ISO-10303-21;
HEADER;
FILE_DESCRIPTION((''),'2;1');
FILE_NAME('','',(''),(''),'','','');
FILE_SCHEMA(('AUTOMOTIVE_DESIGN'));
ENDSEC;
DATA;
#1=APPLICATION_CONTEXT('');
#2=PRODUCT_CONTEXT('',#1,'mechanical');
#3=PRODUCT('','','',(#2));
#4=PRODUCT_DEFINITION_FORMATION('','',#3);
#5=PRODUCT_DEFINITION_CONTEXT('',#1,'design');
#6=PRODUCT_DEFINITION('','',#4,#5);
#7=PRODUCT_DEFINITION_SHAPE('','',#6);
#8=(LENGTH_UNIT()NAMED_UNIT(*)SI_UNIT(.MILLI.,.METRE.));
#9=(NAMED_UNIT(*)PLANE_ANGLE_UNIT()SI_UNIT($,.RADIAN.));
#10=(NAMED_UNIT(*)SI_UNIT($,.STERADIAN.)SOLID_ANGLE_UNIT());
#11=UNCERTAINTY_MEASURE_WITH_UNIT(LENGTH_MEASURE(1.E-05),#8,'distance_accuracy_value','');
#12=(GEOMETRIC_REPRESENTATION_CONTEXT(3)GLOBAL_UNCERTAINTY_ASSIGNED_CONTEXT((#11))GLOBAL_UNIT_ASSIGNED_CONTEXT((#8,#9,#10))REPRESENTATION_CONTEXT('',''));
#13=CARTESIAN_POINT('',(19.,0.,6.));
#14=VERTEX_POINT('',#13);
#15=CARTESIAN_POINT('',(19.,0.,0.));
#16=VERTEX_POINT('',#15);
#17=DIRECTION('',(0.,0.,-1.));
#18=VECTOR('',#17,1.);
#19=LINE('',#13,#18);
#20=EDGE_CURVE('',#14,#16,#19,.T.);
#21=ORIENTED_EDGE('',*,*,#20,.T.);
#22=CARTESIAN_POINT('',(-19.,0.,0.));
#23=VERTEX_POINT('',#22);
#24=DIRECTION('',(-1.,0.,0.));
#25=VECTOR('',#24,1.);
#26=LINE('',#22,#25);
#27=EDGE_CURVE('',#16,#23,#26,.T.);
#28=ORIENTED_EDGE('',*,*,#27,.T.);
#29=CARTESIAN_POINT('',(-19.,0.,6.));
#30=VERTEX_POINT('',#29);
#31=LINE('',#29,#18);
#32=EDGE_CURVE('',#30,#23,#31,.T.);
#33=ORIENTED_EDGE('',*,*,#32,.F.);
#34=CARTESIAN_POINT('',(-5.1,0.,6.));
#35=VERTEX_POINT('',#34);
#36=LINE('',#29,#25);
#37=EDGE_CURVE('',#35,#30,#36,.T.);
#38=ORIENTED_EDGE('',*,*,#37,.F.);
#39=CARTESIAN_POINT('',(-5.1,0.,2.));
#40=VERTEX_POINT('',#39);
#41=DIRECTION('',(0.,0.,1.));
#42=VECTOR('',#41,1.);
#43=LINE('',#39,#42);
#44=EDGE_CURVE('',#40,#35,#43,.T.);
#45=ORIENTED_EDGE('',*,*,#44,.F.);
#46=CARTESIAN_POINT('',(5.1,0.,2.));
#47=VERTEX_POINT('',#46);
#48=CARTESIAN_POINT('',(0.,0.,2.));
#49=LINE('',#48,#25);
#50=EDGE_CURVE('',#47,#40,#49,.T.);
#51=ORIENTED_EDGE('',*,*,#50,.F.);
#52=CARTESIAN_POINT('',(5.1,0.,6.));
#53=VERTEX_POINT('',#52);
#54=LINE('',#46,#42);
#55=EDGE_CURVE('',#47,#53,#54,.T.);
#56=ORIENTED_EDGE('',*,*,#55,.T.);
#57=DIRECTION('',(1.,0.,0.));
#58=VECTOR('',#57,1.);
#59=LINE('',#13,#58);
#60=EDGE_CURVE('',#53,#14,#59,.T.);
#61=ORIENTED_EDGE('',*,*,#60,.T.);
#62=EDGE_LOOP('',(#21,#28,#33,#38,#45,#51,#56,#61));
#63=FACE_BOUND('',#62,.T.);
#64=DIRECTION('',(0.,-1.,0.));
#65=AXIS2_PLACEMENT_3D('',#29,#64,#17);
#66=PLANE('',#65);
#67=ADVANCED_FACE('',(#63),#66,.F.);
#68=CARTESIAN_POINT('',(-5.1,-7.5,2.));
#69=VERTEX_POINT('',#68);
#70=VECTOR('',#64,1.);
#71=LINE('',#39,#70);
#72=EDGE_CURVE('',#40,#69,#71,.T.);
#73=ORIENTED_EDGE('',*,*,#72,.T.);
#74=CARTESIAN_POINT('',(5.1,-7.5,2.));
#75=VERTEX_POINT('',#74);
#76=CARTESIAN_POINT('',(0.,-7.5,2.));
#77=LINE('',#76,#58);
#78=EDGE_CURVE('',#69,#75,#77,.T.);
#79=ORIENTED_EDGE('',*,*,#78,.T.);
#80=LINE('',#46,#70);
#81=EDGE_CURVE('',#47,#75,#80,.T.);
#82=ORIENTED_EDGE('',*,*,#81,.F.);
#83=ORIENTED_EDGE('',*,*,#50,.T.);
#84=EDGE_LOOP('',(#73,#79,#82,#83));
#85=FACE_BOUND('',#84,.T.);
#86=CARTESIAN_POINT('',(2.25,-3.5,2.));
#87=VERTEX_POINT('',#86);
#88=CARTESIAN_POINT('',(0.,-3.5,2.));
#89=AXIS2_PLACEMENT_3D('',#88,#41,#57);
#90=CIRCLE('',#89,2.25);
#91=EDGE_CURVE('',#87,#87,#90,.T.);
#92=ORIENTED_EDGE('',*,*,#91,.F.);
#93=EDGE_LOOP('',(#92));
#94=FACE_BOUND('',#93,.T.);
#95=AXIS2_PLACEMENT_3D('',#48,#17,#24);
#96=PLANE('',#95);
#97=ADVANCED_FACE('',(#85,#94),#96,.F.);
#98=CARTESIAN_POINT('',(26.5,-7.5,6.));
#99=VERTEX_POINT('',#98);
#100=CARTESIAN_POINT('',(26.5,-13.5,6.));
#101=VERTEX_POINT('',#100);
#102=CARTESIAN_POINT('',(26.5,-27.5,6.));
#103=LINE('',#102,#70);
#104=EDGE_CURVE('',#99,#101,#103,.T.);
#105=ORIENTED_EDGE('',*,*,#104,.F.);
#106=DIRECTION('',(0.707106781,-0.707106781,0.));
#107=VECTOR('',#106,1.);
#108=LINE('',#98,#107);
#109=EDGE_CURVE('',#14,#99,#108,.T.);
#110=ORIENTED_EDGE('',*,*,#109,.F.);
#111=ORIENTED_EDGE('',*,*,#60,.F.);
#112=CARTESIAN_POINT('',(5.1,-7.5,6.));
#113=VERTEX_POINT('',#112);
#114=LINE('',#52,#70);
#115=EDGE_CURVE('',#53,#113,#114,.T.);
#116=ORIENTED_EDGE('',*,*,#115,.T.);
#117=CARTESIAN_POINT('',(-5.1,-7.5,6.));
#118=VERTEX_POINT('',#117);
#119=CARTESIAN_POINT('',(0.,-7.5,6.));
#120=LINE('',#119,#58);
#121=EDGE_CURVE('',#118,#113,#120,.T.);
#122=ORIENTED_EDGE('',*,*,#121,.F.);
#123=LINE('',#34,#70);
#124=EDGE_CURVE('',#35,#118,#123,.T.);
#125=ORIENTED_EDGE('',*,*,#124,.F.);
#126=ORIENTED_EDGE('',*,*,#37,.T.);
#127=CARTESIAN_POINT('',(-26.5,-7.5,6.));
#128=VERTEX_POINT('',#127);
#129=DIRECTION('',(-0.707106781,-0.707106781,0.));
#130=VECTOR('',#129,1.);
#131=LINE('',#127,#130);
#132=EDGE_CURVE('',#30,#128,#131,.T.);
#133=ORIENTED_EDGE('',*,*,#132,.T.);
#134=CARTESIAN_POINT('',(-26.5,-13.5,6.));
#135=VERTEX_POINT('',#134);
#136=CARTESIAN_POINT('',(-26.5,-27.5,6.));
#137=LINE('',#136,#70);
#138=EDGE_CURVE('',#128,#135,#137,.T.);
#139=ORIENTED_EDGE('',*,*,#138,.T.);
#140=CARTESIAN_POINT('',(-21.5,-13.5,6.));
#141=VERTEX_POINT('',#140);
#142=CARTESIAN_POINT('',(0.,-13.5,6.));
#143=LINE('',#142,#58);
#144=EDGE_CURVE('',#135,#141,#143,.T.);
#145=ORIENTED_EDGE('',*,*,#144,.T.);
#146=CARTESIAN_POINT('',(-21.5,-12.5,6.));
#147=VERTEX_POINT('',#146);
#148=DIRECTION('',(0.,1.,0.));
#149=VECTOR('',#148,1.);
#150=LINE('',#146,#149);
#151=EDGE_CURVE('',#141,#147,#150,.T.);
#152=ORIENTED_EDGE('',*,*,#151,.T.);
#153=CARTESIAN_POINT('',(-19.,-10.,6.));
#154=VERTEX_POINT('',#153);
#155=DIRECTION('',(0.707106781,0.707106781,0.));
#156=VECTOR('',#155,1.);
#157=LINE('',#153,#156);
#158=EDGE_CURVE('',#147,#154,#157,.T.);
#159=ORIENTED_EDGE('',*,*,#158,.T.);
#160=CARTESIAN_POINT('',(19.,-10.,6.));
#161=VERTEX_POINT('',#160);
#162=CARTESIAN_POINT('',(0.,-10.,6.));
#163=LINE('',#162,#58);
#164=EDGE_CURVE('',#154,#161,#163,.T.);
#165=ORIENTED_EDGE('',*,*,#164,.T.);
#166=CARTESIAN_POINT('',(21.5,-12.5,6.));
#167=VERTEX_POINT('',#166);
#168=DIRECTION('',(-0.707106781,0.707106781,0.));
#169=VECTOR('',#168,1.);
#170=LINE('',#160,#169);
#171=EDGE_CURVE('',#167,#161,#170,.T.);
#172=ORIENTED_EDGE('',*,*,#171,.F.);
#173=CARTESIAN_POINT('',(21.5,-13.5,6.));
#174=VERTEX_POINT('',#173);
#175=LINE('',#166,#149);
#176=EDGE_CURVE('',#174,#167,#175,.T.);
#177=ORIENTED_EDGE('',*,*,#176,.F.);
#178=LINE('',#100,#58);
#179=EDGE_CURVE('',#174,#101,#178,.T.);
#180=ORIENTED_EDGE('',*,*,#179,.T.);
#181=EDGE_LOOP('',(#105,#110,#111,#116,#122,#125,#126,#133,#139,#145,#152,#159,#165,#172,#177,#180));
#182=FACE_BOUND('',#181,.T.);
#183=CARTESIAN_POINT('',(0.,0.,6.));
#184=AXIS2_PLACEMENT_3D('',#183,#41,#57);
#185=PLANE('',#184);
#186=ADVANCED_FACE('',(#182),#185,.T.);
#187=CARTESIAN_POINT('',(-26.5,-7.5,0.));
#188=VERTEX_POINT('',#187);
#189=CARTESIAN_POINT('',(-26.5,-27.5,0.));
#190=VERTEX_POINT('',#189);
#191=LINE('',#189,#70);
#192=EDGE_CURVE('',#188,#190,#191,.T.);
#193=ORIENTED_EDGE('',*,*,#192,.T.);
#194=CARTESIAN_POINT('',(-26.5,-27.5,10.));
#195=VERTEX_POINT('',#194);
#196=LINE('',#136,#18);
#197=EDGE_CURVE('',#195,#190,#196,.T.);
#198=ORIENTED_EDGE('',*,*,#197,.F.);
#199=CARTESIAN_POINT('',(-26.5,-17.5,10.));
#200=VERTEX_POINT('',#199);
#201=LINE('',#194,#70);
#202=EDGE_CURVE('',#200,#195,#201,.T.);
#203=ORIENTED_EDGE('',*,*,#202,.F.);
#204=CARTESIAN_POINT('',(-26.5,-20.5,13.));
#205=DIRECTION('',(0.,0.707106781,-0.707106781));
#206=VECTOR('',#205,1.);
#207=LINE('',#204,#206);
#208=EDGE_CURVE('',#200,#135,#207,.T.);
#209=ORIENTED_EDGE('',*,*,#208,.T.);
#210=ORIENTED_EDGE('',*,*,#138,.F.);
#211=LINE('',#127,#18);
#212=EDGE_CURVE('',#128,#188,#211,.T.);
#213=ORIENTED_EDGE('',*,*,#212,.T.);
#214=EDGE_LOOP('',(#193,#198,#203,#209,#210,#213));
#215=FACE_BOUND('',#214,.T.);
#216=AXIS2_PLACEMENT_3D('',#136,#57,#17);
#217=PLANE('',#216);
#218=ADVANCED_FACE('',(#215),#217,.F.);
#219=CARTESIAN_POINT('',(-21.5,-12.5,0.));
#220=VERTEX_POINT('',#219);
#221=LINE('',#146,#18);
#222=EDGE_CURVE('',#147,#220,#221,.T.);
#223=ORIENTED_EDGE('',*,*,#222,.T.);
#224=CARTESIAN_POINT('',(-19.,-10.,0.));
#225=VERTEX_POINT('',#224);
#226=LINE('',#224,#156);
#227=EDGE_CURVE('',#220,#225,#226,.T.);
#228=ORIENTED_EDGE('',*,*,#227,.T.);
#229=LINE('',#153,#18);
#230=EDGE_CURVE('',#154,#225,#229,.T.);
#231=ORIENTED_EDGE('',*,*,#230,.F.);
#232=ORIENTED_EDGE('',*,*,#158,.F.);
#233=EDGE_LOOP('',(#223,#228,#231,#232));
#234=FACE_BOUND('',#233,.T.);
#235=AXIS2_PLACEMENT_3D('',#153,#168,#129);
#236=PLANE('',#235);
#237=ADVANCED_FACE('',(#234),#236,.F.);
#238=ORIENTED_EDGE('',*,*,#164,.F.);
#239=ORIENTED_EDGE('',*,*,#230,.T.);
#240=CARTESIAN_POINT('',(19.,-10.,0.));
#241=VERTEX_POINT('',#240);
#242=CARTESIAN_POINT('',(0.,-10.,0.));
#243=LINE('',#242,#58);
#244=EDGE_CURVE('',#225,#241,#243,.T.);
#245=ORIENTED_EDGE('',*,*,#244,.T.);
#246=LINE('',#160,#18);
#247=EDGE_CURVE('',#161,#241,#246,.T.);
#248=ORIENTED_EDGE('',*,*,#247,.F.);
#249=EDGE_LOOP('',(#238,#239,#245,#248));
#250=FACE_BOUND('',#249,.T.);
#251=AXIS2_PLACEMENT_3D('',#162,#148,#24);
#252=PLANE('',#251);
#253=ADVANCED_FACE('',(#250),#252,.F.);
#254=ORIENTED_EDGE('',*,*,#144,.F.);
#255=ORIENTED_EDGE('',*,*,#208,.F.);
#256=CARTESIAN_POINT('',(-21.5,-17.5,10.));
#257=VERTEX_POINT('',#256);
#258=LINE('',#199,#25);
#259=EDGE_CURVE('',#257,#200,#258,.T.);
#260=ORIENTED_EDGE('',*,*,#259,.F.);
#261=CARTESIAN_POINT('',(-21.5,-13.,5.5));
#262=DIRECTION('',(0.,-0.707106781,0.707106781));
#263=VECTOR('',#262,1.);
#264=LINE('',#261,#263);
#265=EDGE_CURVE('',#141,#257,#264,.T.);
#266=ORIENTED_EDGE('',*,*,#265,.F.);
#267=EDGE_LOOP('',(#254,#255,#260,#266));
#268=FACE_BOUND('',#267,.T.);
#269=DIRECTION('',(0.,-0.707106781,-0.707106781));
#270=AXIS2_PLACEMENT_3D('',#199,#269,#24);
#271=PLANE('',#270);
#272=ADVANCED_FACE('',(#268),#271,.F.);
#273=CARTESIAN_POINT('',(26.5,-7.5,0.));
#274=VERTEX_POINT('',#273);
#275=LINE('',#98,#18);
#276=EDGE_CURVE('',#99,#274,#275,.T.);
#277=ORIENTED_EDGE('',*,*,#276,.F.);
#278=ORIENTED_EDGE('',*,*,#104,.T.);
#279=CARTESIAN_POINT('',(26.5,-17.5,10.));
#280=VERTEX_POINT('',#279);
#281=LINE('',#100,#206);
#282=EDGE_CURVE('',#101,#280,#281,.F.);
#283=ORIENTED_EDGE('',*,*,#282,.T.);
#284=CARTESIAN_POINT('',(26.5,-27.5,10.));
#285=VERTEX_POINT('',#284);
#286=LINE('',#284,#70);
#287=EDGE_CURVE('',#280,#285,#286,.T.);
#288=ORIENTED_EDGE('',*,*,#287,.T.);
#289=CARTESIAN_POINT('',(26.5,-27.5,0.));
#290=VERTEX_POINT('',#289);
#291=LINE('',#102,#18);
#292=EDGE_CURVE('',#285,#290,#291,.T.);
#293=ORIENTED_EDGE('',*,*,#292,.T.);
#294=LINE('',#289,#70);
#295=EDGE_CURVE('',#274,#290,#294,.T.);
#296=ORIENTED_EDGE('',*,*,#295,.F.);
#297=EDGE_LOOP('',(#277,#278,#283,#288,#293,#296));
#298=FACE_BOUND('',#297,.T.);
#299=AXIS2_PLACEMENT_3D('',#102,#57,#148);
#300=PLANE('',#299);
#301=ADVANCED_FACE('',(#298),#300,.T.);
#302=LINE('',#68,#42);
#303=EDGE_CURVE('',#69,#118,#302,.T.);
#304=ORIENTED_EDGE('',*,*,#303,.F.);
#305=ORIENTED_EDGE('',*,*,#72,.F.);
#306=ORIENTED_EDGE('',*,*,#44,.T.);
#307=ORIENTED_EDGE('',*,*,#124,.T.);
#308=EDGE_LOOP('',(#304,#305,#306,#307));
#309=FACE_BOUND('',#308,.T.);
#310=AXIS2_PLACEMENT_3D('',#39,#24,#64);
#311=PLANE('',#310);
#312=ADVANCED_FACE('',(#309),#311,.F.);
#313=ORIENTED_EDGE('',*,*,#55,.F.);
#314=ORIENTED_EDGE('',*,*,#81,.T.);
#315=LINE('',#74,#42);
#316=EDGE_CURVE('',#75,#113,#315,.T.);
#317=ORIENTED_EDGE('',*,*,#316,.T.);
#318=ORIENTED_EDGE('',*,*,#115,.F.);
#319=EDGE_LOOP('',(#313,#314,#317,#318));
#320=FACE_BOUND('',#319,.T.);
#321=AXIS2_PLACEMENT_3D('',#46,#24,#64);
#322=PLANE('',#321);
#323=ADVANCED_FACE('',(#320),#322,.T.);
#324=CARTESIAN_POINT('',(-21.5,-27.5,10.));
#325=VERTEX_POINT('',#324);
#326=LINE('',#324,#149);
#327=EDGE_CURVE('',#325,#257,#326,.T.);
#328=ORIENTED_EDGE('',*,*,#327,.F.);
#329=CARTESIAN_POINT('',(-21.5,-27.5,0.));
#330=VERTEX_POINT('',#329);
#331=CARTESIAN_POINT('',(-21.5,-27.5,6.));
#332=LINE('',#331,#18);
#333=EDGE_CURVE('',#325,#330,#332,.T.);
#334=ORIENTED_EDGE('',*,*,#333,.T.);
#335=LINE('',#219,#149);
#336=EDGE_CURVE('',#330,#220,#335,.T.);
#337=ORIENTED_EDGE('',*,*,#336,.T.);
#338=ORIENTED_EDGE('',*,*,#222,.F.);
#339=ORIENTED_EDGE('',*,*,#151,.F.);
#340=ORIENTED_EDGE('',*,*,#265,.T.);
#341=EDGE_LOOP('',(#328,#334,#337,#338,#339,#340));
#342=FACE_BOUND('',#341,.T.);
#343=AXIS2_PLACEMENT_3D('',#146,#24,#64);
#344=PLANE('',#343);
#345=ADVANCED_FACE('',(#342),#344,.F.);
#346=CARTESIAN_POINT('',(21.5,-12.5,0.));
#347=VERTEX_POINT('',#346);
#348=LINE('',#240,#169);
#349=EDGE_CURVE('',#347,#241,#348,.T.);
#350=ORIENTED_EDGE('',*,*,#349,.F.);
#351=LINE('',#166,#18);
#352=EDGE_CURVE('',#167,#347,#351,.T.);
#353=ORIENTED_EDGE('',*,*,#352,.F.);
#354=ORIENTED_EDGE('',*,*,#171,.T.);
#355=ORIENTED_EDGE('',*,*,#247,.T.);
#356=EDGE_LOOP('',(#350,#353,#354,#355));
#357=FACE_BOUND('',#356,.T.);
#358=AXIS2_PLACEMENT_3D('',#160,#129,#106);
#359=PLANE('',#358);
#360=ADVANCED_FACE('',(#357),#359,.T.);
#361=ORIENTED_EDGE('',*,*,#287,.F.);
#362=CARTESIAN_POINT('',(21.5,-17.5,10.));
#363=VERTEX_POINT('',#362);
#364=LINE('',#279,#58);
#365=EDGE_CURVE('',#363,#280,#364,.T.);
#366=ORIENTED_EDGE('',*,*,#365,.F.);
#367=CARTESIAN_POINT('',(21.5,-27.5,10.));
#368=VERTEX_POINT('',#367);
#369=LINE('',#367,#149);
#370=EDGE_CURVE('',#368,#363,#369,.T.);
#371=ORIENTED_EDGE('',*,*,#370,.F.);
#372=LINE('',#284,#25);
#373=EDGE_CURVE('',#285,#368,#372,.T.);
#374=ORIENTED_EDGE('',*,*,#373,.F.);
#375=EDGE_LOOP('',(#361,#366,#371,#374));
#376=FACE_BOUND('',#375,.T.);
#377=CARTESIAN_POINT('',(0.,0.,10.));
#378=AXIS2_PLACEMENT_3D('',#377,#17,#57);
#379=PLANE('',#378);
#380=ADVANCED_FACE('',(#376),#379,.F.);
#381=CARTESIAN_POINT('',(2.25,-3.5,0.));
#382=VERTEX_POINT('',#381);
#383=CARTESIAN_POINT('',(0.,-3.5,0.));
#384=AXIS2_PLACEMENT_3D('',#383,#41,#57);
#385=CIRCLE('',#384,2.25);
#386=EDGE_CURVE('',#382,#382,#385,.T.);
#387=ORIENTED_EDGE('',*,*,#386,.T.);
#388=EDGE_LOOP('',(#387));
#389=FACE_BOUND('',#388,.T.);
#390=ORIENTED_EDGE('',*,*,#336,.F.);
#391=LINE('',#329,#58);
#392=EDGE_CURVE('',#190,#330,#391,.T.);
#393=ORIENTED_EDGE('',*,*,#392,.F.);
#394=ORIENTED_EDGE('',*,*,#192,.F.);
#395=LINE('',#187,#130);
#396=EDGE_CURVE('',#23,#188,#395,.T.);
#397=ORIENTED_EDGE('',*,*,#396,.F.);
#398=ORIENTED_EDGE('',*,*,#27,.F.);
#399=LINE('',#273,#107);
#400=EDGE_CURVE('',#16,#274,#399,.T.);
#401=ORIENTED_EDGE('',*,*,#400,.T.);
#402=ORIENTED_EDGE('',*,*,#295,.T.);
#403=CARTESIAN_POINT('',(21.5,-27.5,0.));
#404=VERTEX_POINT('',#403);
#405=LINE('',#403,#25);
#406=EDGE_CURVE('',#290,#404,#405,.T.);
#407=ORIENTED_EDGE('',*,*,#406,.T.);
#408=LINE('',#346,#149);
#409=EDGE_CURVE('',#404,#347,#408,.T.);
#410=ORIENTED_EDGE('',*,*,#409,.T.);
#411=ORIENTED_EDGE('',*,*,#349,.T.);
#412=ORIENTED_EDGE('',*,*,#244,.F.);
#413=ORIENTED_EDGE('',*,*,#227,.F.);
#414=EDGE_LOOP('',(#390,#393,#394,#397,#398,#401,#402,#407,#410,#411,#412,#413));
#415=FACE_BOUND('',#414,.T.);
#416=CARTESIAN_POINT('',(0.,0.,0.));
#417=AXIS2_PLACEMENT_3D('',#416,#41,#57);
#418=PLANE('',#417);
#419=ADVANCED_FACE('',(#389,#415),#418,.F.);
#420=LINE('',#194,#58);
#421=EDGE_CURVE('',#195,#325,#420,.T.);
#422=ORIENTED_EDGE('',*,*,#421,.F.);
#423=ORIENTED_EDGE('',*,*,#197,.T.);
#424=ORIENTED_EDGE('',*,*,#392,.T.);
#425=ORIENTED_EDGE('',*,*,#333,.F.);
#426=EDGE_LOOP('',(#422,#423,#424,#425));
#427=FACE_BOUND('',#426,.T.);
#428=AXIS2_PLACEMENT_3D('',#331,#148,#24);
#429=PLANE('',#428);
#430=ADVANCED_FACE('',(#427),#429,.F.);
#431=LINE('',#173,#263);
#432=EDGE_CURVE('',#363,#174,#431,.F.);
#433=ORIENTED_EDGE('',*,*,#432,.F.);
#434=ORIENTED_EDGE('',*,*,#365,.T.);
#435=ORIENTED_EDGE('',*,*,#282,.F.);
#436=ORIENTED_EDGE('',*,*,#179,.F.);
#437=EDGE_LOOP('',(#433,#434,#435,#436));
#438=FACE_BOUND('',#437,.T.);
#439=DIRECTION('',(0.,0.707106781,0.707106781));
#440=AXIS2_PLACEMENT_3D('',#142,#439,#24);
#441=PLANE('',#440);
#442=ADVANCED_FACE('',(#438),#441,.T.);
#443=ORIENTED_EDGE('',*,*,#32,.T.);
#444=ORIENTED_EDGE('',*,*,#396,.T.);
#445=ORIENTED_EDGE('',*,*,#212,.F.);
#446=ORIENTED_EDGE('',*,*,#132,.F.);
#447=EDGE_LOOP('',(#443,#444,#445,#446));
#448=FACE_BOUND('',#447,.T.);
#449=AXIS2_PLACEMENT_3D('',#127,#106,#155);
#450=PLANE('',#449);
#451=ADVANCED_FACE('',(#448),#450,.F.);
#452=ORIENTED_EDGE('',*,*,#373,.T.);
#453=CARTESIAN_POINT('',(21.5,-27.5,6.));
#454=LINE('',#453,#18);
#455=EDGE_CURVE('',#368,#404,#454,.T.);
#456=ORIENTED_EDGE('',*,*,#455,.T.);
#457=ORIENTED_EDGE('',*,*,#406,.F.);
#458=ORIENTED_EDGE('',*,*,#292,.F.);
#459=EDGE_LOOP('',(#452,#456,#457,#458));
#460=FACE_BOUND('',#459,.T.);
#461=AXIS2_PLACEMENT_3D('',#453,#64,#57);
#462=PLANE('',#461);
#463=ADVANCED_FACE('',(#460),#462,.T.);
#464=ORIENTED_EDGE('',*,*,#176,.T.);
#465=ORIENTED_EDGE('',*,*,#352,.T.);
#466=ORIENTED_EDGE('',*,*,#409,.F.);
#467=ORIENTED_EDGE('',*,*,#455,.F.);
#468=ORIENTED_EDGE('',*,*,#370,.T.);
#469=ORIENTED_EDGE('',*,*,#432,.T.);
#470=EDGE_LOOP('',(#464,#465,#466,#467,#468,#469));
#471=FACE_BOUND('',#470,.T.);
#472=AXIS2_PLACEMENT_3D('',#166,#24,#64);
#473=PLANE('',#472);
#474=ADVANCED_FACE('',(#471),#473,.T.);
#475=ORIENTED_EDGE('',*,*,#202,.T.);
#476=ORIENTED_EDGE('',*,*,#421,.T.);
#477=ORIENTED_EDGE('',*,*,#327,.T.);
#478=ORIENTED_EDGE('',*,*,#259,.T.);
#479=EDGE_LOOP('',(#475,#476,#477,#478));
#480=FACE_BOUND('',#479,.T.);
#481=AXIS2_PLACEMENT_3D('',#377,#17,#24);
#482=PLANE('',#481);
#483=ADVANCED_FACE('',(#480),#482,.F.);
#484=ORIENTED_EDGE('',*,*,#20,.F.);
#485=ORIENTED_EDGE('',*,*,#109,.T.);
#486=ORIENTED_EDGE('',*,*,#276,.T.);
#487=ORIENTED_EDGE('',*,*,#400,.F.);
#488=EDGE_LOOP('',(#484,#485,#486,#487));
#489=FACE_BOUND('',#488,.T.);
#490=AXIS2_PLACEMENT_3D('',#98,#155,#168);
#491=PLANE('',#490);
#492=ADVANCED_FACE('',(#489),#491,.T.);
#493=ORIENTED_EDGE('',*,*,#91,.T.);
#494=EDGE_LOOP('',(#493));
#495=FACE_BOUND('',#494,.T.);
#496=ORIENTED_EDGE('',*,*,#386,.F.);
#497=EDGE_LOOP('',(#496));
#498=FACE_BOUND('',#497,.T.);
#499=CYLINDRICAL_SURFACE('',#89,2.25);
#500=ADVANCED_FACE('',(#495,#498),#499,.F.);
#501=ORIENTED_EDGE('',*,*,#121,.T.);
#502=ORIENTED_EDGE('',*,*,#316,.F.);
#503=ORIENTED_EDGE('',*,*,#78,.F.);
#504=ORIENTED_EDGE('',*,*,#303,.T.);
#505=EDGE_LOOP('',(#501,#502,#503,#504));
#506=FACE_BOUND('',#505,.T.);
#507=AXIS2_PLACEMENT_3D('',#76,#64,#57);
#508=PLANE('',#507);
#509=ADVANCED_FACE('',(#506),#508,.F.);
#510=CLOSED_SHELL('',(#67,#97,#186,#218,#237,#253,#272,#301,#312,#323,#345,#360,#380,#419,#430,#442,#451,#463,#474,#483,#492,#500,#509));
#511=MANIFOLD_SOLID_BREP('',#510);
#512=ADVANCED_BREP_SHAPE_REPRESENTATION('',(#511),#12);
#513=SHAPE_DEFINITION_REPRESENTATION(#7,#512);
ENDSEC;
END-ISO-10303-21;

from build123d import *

# Parameters (mm, degrees)
BOSS_EXTRUDE1_DEPTH  = 6
SKETCH6_W            = 5
SKETCH6_H            = 10
BOSS_EXTRUDE2_DEPTH  = 4
SKETCH3_W            = 5.1
SKETCH3_H            = 7.5
CUT_EXTRUDE1_DEPTH   = 4
M4_CLEARANCE_HOLE1_D = 4.5
CHAMFER2_SIZE        = 4


with BuildPart() as part:
    # Sketch1 → Boss-Extrude1 (new body)
    with BuildSketch(Plane.XY):
        Polygon((0, 0), (0, -10), (-19, -10), (-21.5, -12.5), (-21.5, -27.5), (-26.5, -27.5), (-26.5, -7.5), (-19, 0), align=None)
    boss_extrude1 = extrude(amount=BOSS_EXTRUDE1_DEPTH)

    # Sketch6 → Boss-Extrude2 (add)
    with BuildSketch(Plane.XY.offset(6)):
        with Locations((-24, -22.5)):
            Rectangle(SKETCH6_W, SKETCH6_H)
    boss_extrude2 = extrude(amount=BOSS_EXTRUDE2_DEPTH)

    # Sketch3 → Cut-Extrude1 (cut)
    with BuildSketch(Plane.XY.offset(6)):
        with Locations((-2.55, -3.75)):
            Rectangle(SKETCH3_W, SKETCH3_H)
    cut_extrude1 = extrude(amount=-CUT_EXTRUDE1_DEPTH, mode=Mode.SUBTRACT)

    # Mirror1: Boss-Extrude1, Boss-Extrude2, Cut-Extrude1 across plane
    add(boss_extrude1.mirror(Plane(origin=(0, 0, 6), x_dir=(0, 0, 1), z_dir=(-1, 0, 0))))
    add(boss_extrude2.mirror(Plane(origin=(0, 0, 6), x_dir=(0, 0, 1), z_dir=(-1, 0, 0))))
    add(cut_extrude1.mirror(Plane(origin=(0, 0, 6), x_dir=(0, 0, 1), z_dir=(-1, 0, 0))), mode=Mode.SUBTRACT)

    # M4 Clearance Hole1 (through all)
    with Locations(Plane.XY.offset(2)):
        with Locations((0, -3.5)):
            Hole(M4_CLEARANCE_HOLE1_D / 2)

    # Chamfer2
    # the kernel refuses this chamfer: 4 mm, written as the material it adds along each edge
    with BuildSketch(Plane(origin=(-21.5, -17.5, 6), x_dir=(0, 0.9996219169112968, -0.02749587661058627), z_dir=(-1, 0, 0))) as chamfer2_piece_1_section:
        Polygon((CHAMFER2_SIZE * 0.999621916911, -CHAMFER2_SIZE * 0.0274958766106), (-CHAMFER2_SIZE * 0.0274958766106, -CHAMFER2_SIZE * 0.999621916911), (0, 0), align=None)
    chamfer2_piece_1 = extrude(amount=5, mode=Mode.PRIVATE)
    chamfer2_piece_1 = split(chamfer2_piece_1, bisect_by=Plane(origin=(-24, -16.178383383, 10), z_dir=(0, 0, -1)), keep=Keep.TOP, mode=Mode.PRIVATE)
    add(chamfer2_piece_1)
    with BuildSketch(Plane(origin=(21.5, -17.5, 6), x_dir=(0, 0.9996219169112968, -0.02749587661058627), z_dir=(1, 0, 0))) as chamfer2_piece_2_section:
        Polygon((CHAMFER2_SIZE * 0.999621916911, CHAMFER2_SIZE * 0.0274958766106), (-CHAMFER2_SIZE * 0.0274958766106, CHAMFER2_SIZE * 0.999621916911), (0, 0), align=None)
    chamfer2_piece_2 = extrude(amount=5, mode=Mode.PRIVATE)
    chamfer2_piece_2 = split(chamfer2_piece_2, bisect_by=Plane(origin=(24, -16.178383383, 10), z_dir=(0, 0, -1)), keep=Keep.TOP, mode=Mode.PRIVATE)
    add(chamfer2_piece_2)


solid = part.part
